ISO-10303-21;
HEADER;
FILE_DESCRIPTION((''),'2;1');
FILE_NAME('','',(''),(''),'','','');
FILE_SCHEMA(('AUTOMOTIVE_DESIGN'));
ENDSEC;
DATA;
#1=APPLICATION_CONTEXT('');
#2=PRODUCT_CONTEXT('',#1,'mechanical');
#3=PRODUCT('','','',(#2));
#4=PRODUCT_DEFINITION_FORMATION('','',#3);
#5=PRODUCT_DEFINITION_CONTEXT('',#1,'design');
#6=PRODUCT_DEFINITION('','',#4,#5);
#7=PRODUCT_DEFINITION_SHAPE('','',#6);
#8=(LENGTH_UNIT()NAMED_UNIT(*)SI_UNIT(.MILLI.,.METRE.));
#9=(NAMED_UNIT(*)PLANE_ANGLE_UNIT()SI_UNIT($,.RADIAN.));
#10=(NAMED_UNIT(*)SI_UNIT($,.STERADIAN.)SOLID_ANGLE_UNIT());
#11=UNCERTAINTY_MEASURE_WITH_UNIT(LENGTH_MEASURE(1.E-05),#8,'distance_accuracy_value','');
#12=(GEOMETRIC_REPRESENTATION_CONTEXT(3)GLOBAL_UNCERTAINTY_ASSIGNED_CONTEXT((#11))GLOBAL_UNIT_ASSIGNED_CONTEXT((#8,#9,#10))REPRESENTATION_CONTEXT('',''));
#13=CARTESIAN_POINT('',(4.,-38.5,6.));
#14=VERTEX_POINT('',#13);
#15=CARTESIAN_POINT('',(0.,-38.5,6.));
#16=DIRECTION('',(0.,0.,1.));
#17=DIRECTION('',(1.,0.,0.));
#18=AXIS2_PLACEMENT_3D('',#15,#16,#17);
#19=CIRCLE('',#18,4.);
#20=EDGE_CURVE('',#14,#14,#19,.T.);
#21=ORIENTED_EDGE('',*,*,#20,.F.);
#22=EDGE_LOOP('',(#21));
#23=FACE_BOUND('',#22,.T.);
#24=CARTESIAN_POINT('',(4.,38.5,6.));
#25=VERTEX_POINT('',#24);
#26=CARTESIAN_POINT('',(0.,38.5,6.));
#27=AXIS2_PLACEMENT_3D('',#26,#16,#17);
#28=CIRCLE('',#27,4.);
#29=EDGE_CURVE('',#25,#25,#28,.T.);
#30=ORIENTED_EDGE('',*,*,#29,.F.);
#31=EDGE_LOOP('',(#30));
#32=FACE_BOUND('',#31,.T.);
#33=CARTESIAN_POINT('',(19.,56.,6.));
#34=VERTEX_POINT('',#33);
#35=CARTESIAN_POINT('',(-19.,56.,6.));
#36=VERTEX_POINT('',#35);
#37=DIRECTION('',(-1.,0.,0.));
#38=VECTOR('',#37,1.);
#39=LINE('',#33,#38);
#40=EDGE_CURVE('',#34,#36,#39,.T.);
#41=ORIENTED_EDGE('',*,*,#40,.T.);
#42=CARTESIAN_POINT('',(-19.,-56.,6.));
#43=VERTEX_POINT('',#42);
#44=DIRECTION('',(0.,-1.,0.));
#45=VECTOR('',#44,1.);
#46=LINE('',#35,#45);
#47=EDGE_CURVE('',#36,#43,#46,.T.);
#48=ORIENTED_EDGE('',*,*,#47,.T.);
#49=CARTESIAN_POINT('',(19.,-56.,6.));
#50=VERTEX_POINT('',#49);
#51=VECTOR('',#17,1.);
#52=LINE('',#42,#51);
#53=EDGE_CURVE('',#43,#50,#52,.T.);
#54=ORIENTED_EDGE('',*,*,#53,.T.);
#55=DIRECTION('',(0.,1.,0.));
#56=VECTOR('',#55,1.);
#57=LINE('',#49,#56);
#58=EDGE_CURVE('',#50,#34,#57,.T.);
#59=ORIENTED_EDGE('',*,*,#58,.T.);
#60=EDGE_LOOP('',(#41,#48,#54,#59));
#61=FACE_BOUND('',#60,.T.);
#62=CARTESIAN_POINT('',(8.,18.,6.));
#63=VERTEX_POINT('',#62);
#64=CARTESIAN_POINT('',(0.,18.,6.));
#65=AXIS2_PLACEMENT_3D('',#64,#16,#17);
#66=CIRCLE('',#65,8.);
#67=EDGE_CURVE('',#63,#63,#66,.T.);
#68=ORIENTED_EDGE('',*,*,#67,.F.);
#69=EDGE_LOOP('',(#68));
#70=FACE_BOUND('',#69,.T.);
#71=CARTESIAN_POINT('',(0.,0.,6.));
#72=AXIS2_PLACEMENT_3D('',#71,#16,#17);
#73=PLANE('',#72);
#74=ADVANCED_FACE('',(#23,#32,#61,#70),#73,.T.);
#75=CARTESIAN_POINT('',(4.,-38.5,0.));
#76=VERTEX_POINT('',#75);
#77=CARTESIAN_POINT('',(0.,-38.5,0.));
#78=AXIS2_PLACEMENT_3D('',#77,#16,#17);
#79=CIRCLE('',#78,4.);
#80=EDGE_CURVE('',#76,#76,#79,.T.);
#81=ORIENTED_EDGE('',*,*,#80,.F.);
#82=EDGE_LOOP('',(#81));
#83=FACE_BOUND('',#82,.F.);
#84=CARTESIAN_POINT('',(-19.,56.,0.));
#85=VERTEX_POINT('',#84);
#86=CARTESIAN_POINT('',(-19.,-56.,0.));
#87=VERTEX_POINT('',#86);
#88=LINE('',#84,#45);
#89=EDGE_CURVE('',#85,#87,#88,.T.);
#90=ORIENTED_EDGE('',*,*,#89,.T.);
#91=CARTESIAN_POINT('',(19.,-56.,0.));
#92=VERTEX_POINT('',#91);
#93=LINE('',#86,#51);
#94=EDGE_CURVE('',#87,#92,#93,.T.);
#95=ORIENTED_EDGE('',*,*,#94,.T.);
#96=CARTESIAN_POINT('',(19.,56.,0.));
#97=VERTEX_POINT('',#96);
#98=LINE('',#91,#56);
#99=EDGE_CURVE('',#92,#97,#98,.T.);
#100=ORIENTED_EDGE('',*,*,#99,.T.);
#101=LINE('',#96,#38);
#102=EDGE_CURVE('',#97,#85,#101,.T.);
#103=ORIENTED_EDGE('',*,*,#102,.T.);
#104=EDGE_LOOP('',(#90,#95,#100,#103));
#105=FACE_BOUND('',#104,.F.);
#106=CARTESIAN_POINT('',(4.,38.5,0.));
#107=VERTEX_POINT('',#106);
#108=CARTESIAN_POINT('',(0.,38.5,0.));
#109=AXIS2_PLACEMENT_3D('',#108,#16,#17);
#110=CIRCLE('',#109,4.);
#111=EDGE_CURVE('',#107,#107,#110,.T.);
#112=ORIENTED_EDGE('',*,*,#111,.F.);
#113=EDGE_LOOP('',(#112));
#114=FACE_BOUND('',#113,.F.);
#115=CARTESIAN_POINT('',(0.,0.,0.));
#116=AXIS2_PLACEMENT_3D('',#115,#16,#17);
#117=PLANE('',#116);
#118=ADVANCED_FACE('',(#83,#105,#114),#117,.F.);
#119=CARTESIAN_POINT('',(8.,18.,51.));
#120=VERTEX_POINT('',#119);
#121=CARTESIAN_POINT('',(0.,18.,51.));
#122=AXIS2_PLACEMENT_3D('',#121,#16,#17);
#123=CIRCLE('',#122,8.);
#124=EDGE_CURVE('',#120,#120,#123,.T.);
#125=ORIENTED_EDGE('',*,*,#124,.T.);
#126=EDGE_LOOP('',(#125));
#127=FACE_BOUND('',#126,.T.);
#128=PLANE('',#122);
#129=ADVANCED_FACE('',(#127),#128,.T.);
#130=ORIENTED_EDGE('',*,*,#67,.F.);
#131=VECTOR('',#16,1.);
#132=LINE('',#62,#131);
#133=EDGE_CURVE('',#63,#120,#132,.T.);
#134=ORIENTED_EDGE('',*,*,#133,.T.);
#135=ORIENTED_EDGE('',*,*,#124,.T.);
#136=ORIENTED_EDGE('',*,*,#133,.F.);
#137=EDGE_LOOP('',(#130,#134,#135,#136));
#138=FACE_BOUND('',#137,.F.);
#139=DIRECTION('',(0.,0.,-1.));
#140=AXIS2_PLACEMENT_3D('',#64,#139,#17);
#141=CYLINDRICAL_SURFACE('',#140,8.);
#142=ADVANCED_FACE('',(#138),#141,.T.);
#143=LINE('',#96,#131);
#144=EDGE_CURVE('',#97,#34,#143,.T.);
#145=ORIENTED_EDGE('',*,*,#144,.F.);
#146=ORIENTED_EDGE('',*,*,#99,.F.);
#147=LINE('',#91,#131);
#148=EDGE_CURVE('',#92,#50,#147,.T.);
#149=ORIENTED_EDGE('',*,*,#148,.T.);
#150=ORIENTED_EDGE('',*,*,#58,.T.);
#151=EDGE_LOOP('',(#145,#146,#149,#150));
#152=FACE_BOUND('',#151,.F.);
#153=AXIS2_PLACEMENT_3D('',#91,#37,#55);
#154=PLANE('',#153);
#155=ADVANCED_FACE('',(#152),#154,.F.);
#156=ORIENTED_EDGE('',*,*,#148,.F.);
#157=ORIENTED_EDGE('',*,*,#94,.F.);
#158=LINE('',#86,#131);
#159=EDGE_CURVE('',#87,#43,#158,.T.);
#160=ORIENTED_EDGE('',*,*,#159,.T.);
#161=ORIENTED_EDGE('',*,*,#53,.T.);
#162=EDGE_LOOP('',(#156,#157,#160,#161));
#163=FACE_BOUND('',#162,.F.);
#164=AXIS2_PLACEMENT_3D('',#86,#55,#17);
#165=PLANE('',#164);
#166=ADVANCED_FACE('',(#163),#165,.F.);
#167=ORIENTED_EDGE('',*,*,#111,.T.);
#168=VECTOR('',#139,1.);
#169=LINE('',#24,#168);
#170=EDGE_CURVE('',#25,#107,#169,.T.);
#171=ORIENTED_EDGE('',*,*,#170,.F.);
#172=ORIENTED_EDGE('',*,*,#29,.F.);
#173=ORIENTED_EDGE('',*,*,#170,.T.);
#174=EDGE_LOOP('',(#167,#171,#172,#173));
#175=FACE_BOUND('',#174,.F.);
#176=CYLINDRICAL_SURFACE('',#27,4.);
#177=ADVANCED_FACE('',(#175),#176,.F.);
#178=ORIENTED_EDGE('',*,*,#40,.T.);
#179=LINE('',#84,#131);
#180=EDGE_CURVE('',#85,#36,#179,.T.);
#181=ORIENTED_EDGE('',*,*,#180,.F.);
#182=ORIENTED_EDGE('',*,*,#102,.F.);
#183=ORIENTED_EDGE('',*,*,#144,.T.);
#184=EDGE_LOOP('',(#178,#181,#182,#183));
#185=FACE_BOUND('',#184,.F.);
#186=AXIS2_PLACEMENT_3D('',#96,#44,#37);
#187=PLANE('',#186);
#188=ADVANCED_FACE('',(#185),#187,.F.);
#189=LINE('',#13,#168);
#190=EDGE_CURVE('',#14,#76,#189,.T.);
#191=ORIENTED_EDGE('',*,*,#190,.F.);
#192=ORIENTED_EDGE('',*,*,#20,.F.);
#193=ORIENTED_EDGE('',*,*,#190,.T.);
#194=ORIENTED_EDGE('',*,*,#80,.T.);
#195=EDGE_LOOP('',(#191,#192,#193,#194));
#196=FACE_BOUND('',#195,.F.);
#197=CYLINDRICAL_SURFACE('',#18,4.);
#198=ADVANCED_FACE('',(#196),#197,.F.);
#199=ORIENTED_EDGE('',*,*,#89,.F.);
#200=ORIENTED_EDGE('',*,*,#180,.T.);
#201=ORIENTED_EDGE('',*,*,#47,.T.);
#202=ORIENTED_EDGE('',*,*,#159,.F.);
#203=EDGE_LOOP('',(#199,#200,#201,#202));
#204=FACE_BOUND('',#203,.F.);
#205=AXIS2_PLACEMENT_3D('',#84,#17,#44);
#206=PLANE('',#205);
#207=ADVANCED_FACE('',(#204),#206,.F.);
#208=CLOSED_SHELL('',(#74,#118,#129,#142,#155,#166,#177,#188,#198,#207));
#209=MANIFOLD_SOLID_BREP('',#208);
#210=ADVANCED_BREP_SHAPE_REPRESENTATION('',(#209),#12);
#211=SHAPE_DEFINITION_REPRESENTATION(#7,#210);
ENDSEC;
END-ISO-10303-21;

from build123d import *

# Parameters (mm, degrees)
F1_DEPTH = 6
F2_R     = 4
F3_DEPTH = 6.001
F4_R     = 8
F5_DEPTH = 45


# Not quite as in the source:
# - a feature names something its author has since deleted; it is built from what else it names


with BuildPart() as f1:
    # F0 (on Top) → F1 (new body)
    with BuildSketch(Plane.XY):
        Polygon((-19, 56), (-19, 0), (-19, -56), (0, -56), (19, -56), (19, 0), (19, 56), (0, 56), align=None)
    extrude(amount=F1_DEPTH)

    # F2 (on face) → F3 (cut, through all)
    with BuildSketch(Plane.XY.offset(6)):
        with Locations((0, 38.5)):
            Circle(F2_R)
        with Locations((0, -38.5)):
            Circle(F2_R)
    extrude(amount=-F3_DEPTH, mode=Mode.SUBTRACT)

    # F4 (on face) → F5 (join)
    with BuildSketch(Plane.XY.offset(6)):
        with Locations((0, 18)):
            Circle(F4_R)
    extrude(amount=F5_DEPTH)


solid = f1.part
